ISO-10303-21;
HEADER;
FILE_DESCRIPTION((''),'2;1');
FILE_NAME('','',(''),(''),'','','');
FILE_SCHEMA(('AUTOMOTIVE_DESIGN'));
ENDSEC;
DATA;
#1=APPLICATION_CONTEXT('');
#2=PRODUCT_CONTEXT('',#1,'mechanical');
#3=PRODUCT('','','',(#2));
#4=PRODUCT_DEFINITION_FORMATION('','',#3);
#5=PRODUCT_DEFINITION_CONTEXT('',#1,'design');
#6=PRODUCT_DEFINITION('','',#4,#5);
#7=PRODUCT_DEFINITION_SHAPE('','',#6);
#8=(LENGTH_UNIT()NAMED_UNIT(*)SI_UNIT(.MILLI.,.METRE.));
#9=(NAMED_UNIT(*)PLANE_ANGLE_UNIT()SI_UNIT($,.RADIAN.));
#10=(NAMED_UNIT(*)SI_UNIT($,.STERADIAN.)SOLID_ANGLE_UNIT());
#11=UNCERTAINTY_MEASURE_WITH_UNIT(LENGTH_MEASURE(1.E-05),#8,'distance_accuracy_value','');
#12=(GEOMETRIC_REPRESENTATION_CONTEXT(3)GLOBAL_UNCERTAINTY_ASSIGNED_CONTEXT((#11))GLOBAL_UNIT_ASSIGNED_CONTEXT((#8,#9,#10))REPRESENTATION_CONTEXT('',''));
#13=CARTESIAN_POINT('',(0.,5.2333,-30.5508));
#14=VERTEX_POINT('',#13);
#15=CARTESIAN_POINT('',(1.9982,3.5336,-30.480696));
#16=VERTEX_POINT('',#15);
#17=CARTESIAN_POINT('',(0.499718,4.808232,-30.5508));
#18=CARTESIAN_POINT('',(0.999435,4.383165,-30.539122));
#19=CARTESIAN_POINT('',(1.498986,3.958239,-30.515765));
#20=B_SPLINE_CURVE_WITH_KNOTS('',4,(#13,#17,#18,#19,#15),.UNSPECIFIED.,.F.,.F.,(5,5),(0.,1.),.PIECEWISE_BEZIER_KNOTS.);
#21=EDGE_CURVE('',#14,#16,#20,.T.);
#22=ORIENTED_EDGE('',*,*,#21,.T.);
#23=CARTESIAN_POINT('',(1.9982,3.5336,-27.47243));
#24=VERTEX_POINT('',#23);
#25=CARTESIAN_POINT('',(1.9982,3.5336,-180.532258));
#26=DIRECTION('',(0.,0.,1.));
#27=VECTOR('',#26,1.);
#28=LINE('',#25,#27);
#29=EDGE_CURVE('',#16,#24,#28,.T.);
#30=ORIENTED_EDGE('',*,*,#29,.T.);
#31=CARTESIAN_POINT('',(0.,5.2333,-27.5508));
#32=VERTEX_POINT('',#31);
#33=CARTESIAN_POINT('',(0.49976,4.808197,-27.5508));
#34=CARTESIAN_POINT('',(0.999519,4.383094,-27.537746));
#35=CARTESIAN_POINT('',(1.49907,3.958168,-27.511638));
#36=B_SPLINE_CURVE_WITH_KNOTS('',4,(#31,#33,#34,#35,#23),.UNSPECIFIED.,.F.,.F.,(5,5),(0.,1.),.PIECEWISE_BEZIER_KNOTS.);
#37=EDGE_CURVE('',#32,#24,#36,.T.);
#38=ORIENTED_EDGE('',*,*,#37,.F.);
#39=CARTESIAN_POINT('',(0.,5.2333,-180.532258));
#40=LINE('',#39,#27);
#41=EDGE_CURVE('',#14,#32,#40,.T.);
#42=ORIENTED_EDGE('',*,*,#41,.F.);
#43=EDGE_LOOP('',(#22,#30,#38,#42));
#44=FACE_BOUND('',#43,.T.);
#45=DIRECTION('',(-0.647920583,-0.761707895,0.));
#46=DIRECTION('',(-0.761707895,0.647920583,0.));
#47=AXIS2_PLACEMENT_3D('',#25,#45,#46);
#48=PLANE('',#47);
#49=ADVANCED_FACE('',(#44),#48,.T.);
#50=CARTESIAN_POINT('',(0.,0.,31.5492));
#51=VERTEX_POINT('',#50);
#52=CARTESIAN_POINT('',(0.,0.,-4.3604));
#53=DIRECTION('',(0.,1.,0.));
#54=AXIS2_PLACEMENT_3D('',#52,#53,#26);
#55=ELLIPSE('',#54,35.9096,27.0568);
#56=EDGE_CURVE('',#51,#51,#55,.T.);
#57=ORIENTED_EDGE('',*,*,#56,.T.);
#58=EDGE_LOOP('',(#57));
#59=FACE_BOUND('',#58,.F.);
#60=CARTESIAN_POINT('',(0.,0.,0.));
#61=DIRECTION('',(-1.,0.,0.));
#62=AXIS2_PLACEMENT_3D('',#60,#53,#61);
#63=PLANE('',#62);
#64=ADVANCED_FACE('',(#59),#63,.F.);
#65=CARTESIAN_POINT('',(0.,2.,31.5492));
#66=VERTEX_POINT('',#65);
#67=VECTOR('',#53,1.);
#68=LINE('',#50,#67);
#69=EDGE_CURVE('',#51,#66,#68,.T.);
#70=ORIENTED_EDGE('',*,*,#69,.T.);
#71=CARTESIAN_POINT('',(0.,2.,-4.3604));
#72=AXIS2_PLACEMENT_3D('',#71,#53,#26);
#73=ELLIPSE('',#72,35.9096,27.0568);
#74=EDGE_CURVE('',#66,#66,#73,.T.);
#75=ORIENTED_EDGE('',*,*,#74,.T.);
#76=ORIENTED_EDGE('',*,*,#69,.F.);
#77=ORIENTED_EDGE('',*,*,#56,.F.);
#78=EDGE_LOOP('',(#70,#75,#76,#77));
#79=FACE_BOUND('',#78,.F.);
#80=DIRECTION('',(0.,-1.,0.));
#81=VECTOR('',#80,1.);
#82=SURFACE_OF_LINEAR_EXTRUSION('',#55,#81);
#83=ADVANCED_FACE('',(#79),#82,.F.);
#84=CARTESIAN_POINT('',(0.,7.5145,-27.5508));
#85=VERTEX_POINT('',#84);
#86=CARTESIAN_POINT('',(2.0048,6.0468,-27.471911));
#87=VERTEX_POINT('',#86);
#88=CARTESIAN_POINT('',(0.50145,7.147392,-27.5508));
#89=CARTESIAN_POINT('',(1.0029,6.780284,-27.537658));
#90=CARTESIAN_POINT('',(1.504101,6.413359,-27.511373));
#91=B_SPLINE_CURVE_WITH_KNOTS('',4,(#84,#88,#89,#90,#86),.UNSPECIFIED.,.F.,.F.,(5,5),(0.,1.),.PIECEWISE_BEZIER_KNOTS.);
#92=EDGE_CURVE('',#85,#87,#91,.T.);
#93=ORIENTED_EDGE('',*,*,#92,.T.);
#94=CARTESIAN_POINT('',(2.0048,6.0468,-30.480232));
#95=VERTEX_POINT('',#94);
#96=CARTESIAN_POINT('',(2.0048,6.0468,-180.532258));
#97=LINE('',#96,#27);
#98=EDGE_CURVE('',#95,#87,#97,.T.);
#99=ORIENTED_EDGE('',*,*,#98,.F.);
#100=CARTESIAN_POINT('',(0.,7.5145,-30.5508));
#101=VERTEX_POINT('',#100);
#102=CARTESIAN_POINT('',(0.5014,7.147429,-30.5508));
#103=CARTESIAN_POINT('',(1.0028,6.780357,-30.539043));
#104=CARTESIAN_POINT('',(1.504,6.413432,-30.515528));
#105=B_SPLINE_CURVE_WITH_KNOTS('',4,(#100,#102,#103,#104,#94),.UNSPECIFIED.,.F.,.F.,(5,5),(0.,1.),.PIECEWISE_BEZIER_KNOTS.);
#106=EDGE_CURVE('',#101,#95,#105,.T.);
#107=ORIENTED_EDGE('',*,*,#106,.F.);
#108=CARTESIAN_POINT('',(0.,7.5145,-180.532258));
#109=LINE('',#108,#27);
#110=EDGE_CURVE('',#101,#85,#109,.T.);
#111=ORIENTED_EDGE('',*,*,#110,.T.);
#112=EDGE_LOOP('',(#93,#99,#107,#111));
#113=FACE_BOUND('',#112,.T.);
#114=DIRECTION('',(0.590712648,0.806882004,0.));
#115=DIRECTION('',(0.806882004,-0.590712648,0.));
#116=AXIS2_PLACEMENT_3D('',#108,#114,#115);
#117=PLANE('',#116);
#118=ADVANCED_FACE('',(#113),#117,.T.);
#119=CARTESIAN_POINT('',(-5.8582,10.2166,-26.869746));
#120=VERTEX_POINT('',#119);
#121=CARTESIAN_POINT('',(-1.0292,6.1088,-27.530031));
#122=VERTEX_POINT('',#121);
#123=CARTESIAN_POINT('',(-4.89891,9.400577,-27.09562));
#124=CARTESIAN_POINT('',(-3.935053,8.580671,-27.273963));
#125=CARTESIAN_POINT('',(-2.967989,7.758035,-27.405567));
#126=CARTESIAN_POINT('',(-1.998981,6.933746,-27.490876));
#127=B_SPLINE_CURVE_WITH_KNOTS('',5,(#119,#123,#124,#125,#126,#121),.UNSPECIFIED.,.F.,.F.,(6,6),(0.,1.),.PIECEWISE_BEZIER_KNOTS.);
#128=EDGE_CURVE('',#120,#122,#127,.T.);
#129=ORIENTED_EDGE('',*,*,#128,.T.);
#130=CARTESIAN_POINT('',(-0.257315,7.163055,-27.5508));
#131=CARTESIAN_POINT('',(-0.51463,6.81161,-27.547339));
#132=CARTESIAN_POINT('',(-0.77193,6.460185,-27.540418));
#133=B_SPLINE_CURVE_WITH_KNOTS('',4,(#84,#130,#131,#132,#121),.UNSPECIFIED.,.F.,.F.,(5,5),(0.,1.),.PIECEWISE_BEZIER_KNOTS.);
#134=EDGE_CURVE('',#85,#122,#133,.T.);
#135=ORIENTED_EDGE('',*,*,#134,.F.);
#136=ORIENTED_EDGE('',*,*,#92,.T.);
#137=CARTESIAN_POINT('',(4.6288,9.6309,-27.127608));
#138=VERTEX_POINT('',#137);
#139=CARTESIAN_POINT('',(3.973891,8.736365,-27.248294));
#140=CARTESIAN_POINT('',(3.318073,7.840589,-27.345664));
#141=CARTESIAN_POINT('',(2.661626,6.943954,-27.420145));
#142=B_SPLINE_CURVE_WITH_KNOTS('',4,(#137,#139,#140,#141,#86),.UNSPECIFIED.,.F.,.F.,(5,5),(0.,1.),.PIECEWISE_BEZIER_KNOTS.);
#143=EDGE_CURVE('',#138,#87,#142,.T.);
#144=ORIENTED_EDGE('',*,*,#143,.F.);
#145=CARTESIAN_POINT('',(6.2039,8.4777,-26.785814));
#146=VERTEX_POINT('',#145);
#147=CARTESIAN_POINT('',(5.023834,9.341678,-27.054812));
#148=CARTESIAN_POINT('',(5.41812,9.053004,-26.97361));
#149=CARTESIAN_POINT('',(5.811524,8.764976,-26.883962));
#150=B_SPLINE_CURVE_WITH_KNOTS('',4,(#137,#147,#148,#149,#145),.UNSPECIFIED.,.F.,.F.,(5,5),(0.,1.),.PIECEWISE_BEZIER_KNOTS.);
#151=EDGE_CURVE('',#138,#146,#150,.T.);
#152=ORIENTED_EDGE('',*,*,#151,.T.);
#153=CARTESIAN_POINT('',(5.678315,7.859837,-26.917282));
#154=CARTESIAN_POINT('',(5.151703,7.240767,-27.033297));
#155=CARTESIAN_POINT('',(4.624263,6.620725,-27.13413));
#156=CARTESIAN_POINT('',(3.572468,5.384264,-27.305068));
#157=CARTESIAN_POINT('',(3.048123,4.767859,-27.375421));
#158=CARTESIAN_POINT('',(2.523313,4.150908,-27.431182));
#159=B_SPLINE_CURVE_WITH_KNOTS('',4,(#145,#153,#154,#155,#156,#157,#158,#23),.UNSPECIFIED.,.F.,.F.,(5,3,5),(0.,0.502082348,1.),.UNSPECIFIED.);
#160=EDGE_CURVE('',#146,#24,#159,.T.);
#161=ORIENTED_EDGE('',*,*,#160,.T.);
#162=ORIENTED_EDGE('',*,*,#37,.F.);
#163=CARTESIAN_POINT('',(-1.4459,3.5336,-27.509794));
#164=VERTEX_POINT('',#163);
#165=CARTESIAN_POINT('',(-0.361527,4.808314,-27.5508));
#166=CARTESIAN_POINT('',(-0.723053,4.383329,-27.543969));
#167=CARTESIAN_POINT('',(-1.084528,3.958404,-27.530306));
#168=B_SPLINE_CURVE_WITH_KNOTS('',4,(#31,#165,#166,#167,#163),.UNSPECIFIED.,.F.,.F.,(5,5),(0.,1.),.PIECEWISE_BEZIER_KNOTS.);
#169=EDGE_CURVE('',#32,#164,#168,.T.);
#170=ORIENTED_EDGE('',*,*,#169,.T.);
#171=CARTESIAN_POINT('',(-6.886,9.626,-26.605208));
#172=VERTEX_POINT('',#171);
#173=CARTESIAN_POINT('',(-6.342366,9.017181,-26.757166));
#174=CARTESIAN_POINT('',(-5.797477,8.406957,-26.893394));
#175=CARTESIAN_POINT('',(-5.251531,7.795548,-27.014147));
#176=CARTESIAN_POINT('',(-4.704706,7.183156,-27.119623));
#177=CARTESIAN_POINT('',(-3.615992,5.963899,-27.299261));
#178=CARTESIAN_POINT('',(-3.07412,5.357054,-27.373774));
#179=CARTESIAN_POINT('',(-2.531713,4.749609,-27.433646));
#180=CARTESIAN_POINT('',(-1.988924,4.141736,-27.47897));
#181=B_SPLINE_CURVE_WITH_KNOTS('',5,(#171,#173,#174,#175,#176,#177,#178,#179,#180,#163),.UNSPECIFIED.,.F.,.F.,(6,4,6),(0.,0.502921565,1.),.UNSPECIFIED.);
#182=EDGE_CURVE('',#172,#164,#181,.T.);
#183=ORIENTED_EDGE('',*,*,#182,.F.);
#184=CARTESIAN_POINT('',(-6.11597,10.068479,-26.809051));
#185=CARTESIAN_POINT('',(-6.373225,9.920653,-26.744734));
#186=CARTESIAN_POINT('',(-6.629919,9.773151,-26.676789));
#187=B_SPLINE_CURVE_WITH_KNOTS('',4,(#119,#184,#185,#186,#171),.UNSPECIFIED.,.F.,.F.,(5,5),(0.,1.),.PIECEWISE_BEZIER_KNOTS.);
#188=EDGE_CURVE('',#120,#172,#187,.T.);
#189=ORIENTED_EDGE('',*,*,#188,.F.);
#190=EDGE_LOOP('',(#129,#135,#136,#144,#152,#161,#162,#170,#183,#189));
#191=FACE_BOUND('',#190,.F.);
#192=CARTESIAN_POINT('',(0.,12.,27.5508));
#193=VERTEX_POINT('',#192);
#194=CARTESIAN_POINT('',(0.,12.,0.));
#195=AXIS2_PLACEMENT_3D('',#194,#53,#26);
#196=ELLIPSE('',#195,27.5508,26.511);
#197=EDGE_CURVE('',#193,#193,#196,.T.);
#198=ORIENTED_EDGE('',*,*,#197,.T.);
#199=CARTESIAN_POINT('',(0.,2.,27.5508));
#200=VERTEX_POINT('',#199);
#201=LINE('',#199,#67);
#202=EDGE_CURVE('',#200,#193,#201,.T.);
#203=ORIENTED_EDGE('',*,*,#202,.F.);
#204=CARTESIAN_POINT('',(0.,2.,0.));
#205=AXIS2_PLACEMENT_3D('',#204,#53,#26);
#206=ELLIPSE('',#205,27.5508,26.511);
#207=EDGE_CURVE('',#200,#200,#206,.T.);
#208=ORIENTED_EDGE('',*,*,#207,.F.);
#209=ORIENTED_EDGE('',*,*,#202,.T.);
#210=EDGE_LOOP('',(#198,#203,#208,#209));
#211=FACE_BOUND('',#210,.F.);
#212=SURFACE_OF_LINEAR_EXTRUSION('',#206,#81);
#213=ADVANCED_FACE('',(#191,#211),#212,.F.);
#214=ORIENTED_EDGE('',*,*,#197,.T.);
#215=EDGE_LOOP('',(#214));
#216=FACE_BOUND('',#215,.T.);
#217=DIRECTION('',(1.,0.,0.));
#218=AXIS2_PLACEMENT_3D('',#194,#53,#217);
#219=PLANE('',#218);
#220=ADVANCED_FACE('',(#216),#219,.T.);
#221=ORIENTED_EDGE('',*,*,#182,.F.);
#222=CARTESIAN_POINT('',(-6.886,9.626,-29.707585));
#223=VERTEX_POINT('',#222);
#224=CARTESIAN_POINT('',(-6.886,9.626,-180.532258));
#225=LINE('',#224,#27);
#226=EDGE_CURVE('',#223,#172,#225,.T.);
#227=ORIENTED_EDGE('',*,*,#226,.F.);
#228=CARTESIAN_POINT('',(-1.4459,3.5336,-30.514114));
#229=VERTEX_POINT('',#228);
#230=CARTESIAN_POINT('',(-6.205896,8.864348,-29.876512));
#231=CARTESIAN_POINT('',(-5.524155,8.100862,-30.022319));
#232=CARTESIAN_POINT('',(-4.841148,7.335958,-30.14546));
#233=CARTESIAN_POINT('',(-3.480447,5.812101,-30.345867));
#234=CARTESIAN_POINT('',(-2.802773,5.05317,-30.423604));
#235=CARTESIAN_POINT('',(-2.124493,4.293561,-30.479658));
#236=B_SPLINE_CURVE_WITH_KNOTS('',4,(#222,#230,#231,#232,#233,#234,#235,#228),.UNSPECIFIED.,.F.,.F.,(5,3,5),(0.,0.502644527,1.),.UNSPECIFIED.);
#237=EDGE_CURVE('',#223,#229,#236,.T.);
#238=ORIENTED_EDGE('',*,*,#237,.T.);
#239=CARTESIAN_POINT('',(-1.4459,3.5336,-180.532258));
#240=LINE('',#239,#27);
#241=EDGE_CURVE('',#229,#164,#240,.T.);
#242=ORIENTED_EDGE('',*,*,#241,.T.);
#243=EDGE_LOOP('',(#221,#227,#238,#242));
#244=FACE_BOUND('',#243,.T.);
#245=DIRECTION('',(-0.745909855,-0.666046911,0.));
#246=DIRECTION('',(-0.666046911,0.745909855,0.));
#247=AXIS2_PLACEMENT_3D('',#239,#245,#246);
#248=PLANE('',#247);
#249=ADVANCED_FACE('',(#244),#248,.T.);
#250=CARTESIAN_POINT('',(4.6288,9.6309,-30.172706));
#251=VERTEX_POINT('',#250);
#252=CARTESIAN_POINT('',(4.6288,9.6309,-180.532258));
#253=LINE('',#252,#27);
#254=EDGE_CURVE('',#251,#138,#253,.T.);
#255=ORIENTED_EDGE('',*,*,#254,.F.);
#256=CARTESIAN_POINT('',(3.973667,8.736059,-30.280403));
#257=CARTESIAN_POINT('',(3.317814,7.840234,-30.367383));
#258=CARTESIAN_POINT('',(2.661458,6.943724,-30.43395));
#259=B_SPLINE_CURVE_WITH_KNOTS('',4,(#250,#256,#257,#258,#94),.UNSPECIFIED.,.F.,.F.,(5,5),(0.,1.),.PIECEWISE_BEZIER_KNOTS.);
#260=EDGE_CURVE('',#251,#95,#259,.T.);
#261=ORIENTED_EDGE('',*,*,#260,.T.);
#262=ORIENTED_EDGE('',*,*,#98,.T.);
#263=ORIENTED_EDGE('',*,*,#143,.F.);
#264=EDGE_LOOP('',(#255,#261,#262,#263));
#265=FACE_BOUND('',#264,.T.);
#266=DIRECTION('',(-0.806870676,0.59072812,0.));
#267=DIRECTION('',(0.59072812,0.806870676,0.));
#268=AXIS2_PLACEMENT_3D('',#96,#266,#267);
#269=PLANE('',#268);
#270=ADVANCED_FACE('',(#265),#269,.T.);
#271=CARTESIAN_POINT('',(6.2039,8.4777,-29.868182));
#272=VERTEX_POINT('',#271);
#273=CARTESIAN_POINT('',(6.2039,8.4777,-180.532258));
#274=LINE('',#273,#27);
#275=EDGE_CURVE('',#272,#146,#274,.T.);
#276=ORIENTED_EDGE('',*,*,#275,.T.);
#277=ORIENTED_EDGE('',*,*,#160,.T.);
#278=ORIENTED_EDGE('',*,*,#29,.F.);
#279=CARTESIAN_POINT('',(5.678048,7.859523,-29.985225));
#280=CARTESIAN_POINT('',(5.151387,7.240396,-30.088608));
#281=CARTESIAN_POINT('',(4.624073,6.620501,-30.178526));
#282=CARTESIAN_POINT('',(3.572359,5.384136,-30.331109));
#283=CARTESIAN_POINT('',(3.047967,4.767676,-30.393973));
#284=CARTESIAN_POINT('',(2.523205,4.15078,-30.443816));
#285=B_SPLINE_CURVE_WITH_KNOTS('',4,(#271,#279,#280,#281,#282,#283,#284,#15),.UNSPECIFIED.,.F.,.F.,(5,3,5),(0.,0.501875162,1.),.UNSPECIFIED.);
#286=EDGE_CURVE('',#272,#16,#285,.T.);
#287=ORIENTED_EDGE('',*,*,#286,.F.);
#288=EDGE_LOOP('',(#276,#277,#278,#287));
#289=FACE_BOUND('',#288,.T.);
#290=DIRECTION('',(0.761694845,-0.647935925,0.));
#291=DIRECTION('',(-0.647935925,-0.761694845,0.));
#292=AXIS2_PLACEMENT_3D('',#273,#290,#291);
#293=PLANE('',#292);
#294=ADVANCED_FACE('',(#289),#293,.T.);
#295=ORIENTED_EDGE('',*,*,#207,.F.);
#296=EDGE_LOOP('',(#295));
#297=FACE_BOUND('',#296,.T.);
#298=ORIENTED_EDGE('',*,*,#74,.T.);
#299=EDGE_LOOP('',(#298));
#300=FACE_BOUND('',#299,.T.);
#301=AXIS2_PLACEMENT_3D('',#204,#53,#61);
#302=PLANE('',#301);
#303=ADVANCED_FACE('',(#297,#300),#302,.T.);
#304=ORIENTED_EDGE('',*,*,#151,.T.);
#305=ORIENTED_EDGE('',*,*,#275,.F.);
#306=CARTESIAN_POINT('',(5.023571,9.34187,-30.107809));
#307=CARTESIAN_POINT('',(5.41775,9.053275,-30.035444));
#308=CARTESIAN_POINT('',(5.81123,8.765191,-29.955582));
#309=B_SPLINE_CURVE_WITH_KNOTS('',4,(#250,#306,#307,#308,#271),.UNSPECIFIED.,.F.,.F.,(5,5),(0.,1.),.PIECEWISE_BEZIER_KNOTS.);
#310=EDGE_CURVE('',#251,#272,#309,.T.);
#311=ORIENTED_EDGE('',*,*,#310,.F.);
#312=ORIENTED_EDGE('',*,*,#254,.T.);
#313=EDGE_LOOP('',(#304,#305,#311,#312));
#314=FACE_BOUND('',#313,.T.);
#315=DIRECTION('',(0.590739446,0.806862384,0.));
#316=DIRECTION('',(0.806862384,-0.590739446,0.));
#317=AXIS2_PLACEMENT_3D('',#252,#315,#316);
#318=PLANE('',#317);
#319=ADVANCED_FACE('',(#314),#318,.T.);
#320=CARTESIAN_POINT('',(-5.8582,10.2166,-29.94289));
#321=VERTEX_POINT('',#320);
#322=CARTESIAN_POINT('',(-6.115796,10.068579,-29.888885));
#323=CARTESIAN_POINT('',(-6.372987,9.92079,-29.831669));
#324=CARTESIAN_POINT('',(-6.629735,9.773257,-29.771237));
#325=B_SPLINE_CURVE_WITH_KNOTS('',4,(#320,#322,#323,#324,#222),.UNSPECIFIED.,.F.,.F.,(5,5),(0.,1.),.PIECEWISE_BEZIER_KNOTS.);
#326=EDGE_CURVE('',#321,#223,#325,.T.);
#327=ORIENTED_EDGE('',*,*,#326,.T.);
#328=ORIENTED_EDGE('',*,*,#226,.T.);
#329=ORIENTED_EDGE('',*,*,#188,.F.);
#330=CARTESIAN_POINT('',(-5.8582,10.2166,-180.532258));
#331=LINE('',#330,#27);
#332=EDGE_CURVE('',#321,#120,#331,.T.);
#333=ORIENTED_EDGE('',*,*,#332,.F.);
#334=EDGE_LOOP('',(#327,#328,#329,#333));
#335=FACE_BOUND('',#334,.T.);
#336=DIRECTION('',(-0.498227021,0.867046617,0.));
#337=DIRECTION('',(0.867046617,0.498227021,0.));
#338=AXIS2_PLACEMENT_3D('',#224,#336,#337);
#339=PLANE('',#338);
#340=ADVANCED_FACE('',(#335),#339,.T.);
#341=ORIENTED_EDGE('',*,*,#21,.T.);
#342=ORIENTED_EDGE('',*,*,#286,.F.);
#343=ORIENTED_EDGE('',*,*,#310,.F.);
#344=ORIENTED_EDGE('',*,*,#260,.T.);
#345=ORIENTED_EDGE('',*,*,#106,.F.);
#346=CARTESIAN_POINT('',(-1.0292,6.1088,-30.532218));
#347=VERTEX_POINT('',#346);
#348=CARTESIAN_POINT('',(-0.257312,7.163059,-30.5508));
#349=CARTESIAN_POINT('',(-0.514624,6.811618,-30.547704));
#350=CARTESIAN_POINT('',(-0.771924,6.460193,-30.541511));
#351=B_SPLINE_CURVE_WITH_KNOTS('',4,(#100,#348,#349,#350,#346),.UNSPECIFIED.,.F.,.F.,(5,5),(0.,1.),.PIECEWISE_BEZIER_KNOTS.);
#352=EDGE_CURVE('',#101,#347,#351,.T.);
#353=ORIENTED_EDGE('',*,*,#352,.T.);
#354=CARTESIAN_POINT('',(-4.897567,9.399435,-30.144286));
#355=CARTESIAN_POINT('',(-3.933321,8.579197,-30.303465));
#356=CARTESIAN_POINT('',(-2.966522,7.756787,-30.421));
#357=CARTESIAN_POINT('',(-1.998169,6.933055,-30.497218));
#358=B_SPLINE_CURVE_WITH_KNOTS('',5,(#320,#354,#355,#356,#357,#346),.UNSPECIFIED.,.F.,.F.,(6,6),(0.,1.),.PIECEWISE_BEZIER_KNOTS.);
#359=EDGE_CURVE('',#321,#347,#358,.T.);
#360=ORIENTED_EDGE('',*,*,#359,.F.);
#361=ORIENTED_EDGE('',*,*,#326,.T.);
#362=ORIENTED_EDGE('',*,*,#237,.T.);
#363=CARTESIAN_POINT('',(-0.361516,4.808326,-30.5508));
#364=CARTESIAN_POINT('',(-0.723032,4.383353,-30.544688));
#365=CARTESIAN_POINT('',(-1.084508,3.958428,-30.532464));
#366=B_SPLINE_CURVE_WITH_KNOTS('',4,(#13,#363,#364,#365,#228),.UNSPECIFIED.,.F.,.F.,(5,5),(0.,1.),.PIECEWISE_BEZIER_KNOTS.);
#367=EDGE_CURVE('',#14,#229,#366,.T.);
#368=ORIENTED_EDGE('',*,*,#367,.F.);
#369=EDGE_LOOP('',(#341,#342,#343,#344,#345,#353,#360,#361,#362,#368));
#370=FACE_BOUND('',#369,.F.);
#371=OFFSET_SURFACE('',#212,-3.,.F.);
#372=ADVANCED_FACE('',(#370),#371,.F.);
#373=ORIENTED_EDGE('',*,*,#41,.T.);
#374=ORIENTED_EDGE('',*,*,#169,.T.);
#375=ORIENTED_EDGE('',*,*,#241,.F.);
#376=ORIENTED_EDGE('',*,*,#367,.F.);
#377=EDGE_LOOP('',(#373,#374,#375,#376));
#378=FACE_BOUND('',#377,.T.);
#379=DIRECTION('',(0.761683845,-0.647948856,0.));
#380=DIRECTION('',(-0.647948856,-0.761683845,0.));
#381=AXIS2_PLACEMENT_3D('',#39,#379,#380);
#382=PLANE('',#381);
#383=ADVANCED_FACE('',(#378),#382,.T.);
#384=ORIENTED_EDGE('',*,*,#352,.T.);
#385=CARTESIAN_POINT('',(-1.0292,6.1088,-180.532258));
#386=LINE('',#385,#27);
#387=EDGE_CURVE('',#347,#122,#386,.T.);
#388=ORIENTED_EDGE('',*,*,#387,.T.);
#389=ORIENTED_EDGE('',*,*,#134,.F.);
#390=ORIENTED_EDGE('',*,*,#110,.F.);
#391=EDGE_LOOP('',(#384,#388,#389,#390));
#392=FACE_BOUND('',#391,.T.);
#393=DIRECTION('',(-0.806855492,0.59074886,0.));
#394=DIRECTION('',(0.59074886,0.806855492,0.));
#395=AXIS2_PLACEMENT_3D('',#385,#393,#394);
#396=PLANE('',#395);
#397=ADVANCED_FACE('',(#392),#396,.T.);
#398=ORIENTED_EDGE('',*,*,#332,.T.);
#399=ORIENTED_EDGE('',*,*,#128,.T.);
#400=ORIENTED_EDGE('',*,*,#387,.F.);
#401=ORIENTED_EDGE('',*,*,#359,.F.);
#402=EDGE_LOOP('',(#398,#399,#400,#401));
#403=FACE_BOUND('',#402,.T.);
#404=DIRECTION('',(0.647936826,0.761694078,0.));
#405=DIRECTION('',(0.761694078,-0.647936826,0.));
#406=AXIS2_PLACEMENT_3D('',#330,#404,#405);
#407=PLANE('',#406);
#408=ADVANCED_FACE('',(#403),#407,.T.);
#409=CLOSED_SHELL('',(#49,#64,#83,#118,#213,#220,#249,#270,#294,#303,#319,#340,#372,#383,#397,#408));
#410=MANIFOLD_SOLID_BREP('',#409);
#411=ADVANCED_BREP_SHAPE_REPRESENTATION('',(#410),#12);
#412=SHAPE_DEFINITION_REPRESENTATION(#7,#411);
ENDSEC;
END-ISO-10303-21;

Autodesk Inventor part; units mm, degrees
ref_plane "YZ Plane" through (0, 0, 0) normal (1, 0, 0) x (0, 1, 0)
ref_plane "XZ Plane" through (0, 0, 0) normal (0, 1, 0) x (-1, 0, 0)
sketch "Sketch1" plane through (0, 0, 0) normal (0, 1, 0) x (-1, 0, 0)
  ellipse E0 centre (0, -4.3604) end of major axis (0, 31.5492) minor radius 27.0568
  ellipse E1 centre (0, -7.8745) end of major axis (0, -12.399) minor radius 3.571
  point P0 (0.4642, 6.4079)
extrude "Extrusion1" add sketch "Sketch1" along normal blind 2 contours E0 | E1
sketch "Sketch2" plane through (0, 2, 0) normal (0, 1, 0) x (1, 0, 0)
  ellipse E0 centre (0, 0) end of major axis (0, -27.5508) minor radius 26.511
  ellipse E1 centre (0, 4.3604) end of major axis (0, -31.5492) minor radius 27.0568 projected
  point P0 (8.845, -15.5857)
  point P1 (-8.845, -15.5857)
extrude "Extrusion2" add sketch "Sketch2" along normal blind 10 contours E0
ref_plane "Work Plane1" through (0, 0, -57) normal (0, 0, 1) x (1, 0, 0)
sketch "Sketch3" plane through (0, 0, -57) normal (0, 0, 1) x (1, 0, 0)
  line L0 (0, 7.5145) -> (2.0048, 6.0468)
  line L1 (2.0048, 6.0468) -> (4.6288, 9.6309)
  line L2 (4.6288, 9.6309) -> (6.2039, 8.4777)
  line L3 (6.2039, 8.4777) -> (1.9982, 3.5336)
  line L4 (1.9982, 3.5336) -> (0, 5.2333)
  line L5 (0, 5.2333) -> (-1.4459, 3.5336)
  line L6 (-1.4459, 3.5336) -> (-6.886, 9.626)
  line L7 (-6.886, 9.626) -> (-5.8582, 10.2166)
  line L8 (-5.8582, 10.2166) -> (-1.0292, 6.1088)
  line L9 (-1.0292, 6.1088) -> (0, 7.5145)
  point P0 (0, 0)
emboss "Emboss1" sketch "Sketch3" operation add depth 3 direction (0, 0, 1)
properties part number "Hat"
